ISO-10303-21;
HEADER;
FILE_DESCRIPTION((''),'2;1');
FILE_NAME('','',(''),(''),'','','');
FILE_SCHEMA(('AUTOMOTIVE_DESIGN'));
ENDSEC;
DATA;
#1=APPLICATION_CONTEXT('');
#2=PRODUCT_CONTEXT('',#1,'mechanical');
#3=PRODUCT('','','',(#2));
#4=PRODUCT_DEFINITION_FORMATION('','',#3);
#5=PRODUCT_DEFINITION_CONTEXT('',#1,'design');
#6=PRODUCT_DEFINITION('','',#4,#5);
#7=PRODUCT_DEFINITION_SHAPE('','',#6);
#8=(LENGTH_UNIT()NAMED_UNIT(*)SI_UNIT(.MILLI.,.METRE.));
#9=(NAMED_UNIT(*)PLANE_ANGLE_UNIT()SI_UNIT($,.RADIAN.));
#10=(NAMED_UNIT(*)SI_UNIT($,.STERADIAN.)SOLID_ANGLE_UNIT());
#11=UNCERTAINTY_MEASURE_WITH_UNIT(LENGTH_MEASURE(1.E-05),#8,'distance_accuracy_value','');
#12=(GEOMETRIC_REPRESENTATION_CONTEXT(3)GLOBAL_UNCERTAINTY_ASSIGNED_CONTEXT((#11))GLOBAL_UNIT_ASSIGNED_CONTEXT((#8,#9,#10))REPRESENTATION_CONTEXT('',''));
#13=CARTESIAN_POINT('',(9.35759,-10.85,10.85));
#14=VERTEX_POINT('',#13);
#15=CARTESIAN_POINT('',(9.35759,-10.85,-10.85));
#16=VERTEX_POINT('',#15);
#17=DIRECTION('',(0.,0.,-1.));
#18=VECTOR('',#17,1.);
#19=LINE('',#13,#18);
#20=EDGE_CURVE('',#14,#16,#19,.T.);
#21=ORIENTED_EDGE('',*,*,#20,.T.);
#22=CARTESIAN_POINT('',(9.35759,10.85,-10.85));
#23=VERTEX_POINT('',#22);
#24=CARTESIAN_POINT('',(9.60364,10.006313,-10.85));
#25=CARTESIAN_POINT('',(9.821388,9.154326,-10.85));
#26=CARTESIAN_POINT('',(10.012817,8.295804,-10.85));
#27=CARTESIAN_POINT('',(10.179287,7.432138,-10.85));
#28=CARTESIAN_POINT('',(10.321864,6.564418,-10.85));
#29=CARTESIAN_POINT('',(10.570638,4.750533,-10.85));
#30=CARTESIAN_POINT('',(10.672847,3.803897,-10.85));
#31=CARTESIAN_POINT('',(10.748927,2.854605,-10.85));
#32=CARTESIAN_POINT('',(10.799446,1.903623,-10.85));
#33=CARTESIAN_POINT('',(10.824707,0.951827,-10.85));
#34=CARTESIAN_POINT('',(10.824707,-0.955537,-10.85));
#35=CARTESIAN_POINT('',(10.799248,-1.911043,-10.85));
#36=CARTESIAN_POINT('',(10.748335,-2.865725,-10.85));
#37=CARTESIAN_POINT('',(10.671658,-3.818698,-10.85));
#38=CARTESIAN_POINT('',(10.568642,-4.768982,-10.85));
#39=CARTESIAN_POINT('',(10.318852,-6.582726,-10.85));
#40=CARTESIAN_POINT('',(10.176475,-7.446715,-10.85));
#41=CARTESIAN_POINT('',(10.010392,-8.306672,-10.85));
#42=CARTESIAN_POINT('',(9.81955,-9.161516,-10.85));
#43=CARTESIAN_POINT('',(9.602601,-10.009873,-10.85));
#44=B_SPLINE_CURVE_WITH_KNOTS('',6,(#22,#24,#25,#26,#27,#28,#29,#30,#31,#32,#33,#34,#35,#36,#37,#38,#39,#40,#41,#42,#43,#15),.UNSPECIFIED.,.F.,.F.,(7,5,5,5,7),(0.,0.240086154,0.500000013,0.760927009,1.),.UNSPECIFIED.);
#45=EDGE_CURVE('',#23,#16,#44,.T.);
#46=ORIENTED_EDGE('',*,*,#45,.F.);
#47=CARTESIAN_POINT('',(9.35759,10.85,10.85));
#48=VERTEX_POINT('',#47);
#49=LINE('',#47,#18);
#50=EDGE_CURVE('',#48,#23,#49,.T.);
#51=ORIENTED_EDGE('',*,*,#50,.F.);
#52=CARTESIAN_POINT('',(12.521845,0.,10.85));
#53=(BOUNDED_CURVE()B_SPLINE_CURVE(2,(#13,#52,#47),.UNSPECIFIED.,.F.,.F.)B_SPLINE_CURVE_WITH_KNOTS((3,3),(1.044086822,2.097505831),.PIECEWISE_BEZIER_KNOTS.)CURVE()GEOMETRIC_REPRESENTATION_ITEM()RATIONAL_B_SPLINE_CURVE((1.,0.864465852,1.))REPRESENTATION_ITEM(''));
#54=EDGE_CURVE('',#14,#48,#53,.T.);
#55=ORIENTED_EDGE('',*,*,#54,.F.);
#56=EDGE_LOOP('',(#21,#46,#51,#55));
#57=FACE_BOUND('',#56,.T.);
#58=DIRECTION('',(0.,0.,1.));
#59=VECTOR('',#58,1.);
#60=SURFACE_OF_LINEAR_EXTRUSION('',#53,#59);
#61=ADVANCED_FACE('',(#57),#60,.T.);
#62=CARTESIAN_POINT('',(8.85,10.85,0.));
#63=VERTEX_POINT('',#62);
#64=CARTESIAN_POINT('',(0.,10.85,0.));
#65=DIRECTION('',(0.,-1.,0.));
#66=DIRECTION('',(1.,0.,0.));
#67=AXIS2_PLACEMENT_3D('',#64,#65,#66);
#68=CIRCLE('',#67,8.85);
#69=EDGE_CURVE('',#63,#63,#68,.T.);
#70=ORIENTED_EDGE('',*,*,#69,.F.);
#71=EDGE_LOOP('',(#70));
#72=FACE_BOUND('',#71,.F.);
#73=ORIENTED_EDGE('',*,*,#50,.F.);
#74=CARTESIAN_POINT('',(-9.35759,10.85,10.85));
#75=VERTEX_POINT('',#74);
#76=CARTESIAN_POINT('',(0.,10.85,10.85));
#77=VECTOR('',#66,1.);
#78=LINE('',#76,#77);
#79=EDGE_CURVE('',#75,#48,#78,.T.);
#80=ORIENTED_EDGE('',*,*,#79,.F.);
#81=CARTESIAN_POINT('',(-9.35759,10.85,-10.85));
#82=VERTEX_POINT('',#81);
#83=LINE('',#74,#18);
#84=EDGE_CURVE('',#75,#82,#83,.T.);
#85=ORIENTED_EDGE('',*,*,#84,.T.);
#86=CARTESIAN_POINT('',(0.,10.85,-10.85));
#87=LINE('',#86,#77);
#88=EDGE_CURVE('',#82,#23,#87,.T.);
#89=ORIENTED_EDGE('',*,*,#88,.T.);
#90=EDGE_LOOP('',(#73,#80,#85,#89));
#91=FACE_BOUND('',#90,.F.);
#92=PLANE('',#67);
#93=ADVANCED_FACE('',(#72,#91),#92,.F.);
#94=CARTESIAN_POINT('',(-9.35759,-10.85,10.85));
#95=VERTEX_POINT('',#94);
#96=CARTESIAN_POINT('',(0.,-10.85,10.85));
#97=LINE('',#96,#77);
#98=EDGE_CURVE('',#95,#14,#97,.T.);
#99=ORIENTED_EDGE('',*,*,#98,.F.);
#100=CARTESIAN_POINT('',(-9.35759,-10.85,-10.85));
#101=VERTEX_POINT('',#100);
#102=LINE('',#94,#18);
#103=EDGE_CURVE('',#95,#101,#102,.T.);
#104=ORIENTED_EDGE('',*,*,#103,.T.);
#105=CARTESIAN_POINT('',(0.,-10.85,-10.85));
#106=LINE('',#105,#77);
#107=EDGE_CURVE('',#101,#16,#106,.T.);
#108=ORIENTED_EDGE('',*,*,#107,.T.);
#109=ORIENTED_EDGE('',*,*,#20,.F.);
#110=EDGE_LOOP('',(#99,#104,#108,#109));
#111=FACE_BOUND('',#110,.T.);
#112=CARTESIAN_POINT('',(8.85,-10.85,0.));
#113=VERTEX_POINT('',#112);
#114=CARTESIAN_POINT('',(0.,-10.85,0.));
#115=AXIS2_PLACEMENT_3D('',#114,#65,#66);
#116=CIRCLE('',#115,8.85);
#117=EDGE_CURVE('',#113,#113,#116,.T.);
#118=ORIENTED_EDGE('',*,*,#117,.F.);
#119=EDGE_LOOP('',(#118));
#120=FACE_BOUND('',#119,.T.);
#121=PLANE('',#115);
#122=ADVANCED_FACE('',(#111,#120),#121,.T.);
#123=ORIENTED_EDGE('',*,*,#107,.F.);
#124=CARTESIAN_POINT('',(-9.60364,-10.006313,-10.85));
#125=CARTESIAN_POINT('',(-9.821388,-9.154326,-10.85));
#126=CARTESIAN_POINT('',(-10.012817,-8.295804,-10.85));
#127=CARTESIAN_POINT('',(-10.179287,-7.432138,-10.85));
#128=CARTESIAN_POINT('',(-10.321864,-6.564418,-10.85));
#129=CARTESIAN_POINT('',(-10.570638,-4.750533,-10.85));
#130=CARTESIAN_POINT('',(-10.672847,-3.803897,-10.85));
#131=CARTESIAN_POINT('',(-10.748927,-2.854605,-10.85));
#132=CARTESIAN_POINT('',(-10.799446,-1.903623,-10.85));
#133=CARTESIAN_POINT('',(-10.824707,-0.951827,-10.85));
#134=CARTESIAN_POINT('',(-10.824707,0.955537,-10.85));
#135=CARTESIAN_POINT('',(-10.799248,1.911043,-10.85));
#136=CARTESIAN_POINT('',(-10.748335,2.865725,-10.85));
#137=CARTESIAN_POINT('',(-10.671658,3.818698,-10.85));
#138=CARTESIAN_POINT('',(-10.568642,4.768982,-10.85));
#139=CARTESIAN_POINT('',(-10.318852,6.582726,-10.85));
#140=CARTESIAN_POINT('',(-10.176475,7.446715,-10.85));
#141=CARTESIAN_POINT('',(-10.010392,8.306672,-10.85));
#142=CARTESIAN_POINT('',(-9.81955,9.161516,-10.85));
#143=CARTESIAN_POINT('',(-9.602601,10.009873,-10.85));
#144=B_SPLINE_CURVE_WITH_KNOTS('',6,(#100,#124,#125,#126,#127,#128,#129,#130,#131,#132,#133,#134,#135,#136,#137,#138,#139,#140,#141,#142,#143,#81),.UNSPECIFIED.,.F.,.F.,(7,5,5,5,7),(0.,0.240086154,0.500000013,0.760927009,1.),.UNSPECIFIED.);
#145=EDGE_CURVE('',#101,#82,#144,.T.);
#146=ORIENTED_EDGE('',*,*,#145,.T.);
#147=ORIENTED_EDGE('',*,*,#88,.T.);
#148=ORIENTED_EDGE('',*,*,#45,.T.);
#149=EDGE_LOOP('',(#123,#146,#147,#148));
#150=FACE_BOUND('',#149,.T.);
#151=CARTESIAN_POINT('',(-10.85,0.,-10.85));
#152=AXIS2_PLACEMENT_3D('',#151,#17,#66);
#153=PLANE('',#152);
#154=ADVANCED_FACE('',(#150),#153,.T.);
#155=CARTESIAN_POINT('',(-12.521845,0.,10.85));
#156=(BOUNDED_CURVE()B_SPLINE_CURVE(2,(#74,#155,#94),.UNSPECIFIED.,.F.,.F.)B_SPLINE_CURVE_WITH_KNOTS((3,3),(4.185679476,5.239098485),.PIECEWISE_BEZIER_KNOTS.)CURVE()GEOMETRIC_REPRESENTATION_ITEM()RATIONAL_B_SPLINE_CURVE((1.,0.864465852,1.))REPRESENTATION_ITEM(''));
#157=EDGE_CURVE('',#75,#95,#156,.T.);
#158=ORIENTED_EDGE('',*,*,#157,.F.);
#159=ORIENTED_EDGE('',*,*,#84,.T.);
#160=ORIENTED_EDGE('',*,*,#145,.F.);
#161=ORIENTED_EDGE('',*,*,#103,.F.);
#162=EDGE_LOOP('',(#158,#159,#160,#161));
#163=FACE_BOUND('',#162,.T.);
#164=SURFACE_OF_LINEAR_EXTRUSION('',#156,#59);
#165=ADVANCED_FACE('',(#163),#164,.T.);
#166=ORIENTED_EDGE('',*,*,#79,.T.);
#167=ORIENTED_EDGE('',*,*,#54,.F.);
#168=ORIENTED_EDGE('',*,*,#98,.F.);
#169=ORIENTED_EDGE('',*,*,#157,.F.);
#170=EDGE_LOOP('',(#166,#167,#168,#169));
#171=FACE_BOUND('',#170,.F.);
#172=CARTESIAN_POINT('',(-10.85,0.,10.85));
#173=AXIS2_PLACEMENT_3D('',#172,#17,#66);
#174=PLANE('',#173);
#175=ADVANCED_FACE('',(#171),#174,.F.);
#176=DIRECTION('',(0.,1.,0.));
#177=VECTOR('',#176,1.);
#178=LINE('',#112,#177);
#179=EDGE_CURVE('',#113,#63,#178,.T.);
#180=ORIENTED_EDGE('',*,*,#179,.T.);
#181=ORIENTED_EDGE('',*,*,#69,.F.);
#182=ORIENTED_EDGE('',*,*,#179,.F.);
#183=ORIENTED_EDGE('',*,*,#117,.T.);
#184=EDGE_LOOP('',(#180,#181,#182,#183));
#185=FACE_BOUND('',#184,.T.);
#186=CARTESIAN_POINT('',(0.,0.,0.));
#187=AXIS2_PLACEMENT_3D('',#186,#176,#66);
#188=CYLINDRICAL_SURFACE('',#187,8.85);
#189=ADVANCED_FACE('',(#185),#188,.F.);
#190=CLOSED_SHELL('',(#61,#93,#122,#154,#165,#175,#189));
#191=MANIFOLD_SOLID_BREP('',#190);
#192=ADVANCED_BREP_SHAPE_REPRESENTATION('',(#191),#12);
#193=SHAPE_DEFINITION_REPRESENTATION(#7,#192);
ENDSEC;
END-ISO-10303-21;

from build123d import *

# Parameters (mm, degrees)
F0_W          = 21.7
F0_H          = 21.7
F0_R          = 8.85
F1_DEPTH      = 10.85
F1_DEPTH_BACK = 10.85
F3_DEPTH      = 25


with BuildPart() as f1:
    # F0 (on Front) → F1 (new body, two sides)
    with BuildSketch(Plane.XZ) as f1_sk:
        Rectangle(F0_W, F0_H)
        Circle(F0_R, mode=Mode.SUBTRACT)
    extrude(amount=F1_DEPTH)
    extrude(f1_sk.sketch, amount=-F1_DEPTH_BACK)

    # F2 (on face) → F3 (cut)
    with BuildSketch(Plane.XY.offset(10.85)):
        with BuildLine():
            add(Edge.make_bspline(
                [(7.9357599601, -14.6792419255), (8.7533080621, -12.9220378395), (9.3575897376, -10.85)],
                knots=[0.8228915355, 0.8228915355, 0.8228915355, 1.0440868221, 1.0440868221, 1.0440868221], degree=2, weights=[1, 0.9938903122, 1]))
            Line((7.9357599601, -14.6792419255), (17.9156405647, -14.6792419255))
            Line((17.9156405647, -14.6792419255), (17.9156405647, 12.7848008303))
            Line((17.9156405647, 12.7848008303), (8.7213948385, 12.7848008303))
            add(Edge.make_bspline(
                [(9.3575897376, 10.85), (9.0655324995, 11.8514429913), (8.7213948385, 12.7848008303)],
                knots=[2.0975058315, 2.0975058315, 2.0975058315, 2.2047475395, 2.2047475395, 2.2047475395], degree=2, weights=[1, 0.9985627464, 1]))
            Line((9.3575897376, 10.85), (10.85, 10.85))
            Line((10.85, 10.85), (10.85, -10.85))
            Line((10.85, -10.85), (9.3575897376, -10.85))
        make_face()
        with BuildLine():
            Line((-17.9156405647, -14.6792419255), (-7.9357599601, -14.6792419255))
            add(Edge.make_bspline(
                [(-9.3575897376, -10.85), (-8.7533080621, -12.9220378395), (-7.9357599601, -14.6792419255)],
                knots=[5.2390984851, 5.2390984851, 5.2390984851, 5.4602937717, 5.4602937717, 5.4602937717], degree=2, weights=[1, 0.9938903122, 1]))
            Line((-9.3575897376, -10.85), (-10.85, -10.85))
            Line((-10.85, -10.85), (-10.85, 10.85))
            Line((-10.85, 10.85), (-9.3575897376, 10.85))
            add(Edge.make_bspline(
                [(-8.7213948385, 12.7848008303), (-9.0655324995, 11.8514429913), (-9.3575897376, 10.85)],
                knots=[4.0784377676, 4.0784377676, 4.0784377676, 4.1856794756, 4.1856794756, 4.1856794756], degree=2, weights=[1, 0.9985627464, 1]))
            Line((-8.7213948385, 12.7848008303), (-17.9156405647, 12.7848008303))
            Line((-17.9156405647, 12.7848008303), (-17.9156405647, -14.6792419255))
        make_face()
        with BuildLine():
            add(Edge.make_bspline(
                [(9.3575897376, -10.85), (12.5218447792, 0), (9.3575897376, 10.85)],
                knots=[1.0440868221, 1.0440868221, 1.0440868221, 2.0975058315, 2.0975058315, 2.0975058315], degree=2, weights=[1, 0.8644658516, 1]))
            Line((9.3575897376, -10.85), (10.85, -10.85))
            Line((10.85, -10.85), (10.85, 10.85))
            Line((10.85, 10.85), (9.3575897376, 10.85))
        make_face()
        with BuildLine():
            Line((-10.85, -10.85), (-9.3575897376, -10.85))
            add(Edge.make_bspline(
                [(-9.3575897376, 10.85), (-12.5218447792, 0), (-9.3575897376, -10.85)],
                knots=[4.1856794756, 4.1856794756, 4.1856794756, 5.2390984851, 5.2390984851, 5.2390984851], degree=2, weights=[1, 0.8644658516, 1]))
            Line((-9.3575897376, 10.85), (-10.85, 10.85))
            Line((-10.85, 10.85), (-10.85, -10.85))
        make_face()
    extrude(amount=-F3_DEPTH, mode=Mode.SUBTRACT)


solid = f1.part
